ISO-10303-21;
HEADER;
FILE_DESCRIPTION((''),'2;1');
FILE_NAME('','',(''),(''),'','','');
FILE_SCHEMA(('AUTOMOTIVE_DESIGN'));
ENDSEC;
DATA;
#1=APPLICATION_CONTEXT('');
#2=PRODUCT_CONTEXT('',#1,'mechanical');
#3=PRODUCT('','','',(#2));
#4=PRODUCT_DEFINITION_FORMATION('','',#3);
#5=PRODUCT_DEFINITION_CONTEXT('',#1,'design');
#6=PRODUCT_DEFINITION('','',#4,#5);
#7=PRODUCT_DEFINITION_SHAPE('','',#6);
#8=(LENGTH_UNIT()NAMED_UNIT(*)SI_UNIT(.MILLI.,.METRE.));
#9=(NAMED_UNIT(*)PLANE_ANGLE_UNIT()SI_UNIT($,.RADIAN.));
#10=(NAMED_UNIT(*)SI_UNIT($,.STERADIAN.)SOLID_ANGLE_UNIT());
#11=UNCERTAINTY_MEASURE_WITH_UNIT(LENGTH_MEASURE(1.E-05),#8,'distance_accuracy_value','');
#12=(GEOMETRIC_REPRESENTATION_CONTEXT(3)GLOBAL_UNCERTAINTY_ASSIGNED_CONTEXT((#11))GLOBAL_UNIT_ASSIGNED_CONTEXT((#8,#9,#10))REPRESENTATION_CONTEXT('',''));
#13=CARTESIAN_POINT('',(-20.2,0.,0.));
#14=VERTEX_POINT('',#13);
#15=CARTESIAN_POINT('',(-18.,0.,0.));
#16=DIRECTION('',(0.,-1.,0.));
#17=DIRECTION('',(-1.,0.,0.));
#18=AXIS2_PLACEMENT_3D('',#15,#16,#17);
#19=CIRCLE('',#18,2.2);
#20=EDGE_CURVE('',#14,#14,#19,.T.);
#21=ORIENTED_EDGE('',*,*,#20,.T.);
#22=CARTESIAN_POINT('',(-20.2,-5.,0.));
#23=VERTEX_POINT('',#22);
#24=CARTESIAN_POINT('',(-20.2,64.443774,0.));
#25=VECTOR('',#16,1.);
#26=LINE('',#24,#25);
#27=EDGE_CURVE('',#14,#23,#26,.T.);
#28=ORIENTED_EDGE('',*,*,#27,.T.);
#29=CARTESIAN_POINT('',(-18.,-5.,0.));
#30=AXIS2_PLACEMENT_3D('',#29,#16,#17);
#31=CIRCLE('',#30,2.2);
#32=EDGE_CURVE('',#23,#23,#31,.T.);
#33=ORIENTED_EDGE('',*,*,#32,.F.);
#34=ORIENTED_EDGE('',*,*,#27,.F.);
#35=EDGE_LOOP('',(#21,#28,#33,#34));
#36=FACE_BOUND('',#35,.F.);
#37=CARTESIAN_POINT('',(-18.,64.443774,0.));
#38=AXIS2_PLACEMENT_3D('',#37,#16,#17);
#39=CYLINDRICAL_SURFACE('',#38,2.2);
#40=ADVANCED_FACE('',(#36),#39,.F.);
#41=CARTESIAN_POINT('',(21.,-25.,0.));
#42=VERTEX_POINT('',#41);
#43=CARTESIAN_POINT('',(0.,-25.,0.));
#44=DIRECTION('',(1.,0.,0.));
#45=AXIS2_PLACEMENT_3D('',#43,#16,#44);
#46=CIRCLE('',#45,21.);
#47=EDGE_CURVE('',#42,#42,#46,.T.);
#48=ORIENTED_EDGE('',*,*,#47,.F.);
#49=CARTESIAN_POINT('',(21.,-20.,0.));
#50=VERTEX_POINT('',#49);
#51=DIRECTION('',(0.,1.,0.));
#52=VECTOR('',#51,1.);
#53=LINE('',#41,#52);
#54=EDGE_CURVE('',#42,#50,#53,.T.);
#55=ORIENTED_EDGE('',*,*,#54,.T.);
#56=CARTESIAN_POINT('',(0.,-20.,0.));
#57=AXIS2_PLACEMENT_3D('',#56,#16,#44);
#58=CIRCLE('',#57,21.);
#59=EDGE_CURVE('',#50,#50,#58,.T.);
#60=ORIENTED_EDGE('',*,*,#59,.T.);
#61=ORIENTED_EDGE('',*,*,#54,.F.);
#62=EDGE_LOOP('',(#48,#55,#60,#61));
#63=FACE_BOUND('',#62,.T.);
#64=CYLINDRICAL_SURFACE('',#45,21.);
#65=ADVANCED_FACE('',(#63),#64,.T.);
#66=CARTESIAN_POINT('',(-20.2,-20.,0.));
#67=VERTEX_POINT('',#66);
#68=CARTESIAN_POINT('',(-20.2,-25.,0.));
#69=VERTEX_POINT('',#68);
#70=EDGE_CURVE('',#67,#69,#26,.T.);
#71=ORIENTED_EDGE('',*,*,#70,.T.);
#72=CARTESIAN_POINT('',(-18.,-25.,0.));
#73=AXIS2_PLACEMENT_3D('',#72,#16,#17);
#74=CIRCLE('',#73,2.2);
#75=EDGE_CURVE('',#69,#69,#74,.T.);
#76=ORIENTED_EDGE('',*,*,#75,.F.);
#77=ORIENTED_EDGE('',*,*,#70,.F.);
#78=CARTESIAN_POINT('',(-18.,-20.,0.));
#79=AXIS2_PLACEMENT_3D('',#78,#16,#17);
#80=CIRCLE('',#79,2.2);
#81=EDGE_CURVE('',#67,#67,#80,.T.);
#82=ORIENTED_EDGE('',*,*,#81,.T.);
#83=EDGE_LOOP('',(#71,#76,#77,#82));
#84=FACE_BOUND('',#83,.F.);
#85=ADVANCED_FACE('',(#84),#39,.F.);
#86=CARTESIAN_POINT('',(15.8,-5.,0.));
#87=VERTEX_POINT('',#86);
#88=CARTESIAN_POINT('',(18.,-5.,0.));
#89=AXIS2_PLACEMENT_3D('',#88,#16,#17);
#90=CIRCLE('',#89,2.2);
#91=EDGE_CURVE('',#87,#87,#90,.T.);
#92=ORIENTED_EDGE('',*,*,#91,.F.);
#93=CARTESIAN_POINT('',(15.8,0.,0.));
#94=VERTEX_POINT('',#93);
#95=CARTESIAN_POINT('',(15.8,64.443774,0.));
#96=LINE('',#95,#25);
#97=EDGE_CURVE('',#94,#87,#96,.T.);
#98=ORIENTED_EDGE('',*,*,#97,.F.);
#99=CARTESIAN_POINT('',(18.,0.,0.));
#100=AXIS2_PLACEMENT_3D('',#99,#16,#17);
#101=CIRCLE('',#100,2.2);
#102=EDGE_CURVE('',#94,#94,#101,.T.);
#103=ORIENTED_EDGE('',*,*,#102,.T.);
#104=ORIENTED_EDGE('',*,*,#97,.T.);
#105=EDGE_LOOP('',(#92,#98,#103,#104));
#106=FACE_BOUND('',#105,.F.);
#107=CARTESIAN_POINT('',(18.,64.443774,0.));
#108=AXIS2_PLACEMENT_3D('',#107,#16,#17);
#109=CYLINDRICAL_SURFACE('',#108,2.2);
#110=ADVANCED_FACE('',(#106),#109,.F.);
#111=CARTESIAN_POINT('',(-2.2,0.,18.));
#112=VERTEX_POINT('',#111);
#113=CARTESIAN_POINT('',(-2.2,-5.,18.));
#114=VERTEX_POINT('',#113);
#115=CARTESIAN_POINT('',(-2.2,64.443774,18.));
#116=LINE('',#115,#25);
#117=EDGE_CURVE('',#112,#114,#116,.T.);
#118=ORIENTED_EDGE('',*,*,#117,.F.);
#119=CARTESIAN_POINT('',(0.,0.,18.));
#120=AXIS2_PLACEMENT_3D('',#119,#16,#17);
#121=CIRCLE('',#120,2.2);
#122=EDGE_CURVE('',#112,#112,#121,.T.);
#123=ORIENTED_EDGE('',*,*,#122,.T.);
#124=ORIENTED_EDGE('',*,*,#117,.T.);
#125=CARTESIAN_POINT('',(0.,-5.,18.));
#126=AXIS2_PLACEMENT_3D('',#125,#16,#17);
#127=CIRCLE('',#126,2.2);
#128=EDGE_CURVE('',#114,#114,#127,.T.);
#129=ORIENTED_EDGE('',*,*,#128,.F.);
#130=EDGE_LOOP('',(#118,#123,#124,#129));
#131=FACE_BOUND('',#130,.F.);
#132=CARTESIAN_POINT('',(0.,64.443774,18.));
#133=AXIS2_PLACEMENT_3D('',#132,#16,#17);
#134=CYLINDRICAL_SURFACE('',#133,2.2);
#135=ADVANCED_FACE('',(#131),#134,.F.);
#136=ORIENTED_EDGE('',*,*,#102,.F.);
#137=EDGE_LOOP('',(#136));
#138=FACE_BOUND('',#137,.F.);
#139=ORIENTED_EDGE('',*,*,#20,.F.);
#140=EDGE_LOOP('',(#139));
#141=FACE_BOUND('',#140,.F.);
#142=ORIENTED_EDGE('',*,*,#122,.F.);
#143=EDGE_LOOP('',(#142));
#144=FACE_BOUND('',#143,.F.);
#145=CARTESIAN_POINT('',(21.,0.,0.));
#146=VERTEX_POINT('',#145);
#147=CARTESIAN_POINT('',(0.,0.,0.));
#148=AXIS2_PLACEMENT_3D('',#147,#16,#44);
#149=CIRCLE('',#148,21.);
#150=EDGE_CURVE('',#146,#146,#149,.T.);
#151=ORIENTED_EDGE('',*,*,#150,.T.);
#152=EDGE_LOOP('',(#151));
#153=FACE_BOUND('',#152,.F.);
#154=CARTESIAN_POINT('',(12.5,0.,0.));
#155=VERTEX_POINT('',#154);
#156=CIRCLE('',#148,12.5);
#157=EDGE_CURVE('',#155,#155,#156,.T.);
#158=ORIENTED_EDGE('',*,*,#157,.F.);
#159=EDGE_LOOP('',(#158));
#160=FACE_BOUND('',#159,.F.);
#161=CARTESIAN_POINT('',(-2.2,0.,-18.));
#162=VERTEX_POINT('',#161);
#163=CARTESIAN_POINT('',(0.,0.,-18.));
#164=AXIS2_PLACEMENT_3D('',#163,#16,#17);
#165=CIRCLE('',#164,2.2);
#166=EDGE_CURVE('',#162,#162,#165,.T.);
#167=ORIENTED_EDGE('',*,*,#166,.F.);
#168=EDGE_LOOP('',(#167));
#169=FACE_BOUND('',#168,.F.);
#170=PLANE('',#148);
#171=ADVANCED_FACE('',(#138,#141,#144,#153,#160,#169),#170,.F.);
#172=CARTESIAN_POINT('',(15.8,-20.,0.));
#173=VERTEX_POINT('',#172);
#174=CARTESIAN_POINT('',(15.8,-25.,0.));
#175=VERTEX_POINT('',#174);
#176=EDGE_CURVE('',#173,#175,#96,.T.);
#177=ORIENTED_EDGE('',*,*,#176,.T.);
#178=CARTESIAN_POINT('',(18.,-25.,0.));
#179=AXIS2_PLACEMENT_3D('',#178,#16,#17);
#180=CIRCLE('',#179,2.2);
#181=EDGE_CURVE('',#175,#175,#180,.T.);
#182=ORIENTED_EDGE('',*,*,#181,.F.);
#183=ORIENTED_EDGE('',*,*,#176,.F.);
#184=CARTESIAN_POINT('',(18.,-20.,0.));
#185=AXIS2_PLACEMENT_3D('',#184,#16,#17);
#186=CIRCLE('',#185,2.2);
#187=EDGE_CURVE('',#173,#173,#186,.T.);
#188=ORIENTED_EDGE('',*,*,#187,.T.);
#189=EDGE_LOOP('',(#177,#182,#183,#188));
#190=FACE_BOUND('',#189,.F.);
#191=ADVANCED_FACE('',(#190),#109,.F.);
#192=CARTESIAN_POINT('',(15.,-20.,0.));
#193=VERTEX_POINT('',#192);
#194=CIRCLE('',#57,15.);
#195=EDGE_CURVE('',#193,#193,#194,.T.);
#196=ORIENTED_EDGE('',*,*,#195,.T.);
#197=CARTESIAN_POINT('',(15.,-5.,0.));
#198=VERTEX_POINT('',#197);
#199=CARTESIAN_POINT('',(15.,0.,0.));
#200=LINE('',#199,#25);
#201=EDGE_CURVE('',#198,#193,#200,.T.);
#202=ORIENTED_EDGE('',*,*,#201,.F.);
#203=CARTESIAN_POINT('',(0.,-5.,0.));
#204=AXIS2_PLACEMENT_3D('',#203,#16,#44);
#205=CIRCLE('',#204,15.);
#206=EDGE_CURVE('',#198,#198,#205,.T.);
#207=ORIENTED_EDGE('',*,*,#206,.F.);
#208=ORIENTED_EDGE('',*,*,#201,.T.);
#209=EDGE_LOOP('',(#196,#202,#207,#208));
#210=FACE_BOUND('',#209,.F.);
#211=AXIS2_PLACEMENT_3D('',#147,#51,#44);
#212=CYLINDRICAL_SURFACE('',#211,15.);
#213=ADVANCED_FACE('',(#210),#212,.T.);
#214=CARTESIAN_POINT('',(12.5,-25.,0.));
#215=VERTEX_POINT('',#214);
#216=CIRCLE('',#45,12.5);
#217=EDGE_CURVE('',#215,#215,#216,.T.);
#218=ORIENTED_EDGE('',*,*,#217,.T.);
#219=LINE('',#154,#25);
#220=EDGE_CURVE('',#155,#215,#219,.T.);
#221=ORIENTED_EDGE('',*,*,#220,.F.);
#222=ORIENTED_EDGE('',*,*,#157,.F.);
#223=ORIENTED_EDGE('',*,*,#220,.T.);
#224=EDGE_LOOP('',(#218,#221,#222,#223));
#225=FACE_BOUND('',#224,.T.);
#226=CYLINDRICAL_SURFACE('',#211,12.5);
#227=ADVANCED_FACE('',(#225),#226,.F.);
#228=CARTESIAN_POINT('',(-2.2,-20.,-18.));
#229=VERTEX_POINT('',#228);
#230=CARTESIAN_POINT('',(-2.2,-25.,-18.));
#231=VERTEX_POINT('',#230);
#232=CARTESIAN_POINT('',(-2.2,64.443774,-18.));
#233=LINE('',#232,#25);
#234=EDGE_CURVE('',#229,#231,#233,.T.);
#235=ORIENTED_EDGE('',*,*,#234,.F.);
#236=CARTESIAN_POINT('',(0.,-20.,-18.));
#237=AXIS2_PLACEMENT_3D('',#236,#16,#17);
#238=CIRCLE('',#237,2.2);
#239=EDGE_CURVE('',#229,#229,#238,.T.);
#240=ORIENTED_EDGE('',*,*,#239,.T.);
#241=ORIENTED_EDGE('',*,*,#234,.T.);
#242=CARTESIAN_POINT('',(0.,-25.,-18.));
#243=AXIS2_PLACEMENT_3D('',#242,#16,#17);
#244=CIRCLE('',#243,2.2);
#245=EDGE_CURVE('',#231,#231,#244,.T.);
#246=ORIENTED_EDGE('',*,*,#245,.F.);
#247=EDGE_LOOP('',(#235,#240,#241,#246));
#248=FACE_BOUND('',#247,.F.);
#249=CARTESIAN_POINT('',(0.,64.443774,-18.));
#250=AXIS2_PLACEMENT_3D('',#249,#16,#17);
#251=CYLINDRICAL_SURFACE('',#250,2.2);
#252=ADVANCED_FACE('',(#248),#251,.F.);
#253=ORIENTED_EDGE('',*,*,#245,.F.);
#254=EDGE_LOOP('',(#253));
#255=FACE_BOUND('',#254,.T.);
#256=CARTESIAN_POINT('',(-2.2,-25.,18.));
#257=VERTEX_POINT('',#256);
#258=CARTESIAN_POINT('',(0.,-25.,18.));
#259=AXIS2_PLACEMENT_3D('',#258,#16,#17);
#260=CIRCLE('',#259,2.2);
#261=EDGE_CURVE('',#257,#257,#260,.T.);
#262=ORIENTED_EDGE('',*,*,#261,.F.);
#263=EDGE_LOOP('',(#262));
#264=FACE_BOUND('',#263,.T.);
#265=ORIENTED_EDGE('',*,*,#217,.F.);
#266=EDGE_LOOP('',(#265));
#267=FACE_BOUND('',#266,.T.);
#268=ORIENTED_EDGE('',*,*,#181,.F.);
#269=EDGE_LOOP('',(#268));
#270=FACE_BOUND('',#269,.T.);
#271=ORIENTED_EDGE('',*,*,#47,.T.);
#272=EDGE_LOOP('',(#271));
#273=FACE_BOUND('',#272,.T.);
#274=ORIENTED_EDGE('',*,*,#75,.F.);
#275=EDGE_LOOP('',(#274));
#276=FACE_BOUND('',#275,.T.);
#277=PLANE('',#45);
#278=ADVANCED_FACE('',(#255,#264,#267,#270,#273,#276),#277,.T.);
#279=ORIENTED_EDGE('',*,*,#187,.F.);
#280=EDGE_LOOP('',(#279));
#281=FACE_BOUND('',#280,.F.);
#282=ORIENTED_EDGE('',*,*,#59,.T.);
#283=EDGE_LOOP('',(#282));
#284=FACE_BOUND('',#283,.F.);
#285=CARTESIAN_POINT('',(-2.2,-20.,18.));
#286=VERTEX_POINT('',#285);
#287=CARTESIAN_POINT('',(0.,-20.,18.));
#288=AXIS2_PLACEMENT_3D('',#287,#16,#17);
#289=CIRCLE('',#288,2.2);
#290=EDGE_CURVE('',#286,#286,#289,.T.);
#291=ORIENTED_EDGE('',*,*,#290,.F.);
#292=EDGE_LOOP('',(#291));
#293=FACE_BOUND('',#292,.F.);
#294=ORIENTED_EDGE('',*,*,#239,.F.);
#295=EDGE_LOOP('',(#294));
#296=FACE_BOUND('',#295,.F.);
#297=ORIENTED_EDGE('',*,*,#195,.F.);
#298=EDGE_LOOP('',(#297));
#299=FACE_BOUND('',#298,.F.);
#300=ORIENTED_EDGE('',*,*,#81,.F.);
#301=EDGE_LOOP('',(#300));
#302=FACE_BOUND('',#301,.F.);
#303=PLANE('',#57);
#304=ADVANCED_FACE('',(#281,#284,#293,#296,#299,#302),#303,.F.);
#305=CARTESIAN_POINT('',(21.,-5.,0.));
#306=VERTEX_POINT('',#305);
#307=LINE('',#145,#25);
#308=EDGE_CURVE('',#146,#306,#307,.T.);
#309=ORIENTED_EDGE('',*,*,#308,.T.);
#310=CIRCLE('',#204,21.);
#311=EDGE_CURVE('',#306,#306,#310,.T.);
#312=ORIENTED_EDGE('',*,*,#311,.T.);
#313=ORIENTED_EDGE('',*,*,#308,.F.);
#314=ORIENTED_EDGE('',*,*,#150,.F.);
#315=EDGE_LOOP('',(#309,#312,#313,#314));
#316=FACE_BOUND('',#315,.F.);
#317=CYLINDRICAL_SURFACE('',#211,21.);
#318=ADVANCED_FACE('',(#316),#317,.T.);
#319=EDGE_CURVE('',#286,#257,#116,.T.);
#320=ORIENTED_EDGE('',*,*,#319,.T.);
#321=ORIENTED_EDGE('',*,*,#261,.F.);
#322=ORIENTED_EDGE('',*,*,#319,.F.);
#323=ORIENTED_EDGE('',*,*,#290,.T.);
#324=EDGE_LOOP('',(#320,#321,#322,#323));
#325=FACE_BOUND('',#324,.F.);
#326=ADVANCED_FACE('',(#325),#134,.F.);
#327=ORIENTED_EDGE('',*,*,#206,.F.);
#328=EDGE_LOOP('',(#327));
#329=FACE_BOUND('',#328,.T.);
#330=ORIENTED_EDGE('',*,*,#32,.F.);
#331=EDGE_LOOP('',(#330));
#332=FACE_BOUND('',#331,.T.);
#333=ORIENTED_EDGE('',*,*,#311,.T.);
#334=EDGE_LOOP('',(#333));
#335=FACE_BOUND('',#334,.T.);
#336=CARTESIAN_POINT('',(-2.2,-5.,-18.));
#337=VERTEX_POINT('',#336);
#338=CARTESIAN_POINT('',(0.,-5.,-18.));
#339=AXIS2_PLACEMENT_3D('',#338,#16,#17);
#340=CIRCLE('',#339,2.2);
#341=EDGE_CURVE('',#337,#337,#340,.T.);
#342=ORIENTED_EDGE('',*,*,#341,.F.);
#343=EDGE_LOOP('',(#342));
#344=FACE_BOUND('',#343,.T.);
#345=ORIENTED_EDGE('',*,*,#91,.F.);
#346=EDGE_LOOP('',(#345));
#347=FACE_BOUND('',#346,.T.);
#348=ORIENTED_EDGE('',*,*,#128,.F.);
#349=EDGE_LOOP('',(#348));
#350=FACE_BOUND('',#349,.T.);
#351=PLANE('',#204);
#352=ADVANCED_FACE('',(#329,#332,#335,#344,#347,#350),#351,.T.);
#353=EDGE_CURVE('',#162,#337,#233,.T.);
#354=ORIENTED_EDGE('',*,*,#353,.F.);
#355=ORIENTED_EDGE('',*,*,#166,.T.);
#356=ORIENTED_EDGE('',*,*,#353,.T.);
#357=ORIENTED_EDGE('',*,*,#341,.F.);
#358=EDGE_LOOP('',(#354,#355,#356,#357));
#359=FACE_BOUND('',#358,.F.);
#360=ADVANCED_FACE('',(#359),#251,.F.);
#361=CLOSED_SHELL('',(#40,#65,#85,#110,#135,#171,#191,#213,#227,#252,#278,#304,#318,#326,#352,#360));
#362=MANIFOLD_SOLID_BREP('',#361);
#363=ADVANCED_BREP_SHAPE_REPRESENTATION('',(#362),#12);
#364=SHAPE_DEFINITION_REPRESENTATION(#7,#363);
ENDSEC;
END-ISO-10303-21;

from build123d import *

# Parameters (mm, degrees)
F0_R     = 15
F0_R_2   = 12.5
F1_DEPTH = 25
F0_R_3   = 21
F3_DEPTH = 5
F4_R     = 21
F4_R_2   = 15
F5_DEPTH = 5
F6_D     = 4.4


# Not quite as in the source:
# - the program builds the solid bodies; features that only make, move or delete a surface that nothing else refers to are left out


with BuildPart() as f1:
    # F0 (on Front) → F1 (new body)
    with BuildSketch(Plane.XZ):
        Circle(F0_R)
        Circle(F0_R_2, mode=Mode.SUBTRACT)
    extrude(amount=F1_DEPTH)

    # F0 (on Front) → F3 (join)
    with BuildSketch(Plane.XZ):
        Circle(F0_R_3)
        Circle(F0_R, mode=Mode.SUBTRACT)
    extrude(amount=F3_DEPTH)

    # F4 (on face) → F5 (join)
    with BuildSketch(Plane.XZ.offset(25)):
        Circle(F4_R)
        Circle(F4_R_2, mode=Mode.SUBTRACT)
    extrude(amount=-F5_DEPTH)

    # F6 (through all)
    with Locations(Plane(origin=(0, 0, 0), x_dir=(1, 0, 0), z_dir=(0, 1, 0))):
        with Locations((-18, 0), (0, 18), (18, 0), (0, -18)):
            Hole(F6_D / 2)


solid = f1.part
